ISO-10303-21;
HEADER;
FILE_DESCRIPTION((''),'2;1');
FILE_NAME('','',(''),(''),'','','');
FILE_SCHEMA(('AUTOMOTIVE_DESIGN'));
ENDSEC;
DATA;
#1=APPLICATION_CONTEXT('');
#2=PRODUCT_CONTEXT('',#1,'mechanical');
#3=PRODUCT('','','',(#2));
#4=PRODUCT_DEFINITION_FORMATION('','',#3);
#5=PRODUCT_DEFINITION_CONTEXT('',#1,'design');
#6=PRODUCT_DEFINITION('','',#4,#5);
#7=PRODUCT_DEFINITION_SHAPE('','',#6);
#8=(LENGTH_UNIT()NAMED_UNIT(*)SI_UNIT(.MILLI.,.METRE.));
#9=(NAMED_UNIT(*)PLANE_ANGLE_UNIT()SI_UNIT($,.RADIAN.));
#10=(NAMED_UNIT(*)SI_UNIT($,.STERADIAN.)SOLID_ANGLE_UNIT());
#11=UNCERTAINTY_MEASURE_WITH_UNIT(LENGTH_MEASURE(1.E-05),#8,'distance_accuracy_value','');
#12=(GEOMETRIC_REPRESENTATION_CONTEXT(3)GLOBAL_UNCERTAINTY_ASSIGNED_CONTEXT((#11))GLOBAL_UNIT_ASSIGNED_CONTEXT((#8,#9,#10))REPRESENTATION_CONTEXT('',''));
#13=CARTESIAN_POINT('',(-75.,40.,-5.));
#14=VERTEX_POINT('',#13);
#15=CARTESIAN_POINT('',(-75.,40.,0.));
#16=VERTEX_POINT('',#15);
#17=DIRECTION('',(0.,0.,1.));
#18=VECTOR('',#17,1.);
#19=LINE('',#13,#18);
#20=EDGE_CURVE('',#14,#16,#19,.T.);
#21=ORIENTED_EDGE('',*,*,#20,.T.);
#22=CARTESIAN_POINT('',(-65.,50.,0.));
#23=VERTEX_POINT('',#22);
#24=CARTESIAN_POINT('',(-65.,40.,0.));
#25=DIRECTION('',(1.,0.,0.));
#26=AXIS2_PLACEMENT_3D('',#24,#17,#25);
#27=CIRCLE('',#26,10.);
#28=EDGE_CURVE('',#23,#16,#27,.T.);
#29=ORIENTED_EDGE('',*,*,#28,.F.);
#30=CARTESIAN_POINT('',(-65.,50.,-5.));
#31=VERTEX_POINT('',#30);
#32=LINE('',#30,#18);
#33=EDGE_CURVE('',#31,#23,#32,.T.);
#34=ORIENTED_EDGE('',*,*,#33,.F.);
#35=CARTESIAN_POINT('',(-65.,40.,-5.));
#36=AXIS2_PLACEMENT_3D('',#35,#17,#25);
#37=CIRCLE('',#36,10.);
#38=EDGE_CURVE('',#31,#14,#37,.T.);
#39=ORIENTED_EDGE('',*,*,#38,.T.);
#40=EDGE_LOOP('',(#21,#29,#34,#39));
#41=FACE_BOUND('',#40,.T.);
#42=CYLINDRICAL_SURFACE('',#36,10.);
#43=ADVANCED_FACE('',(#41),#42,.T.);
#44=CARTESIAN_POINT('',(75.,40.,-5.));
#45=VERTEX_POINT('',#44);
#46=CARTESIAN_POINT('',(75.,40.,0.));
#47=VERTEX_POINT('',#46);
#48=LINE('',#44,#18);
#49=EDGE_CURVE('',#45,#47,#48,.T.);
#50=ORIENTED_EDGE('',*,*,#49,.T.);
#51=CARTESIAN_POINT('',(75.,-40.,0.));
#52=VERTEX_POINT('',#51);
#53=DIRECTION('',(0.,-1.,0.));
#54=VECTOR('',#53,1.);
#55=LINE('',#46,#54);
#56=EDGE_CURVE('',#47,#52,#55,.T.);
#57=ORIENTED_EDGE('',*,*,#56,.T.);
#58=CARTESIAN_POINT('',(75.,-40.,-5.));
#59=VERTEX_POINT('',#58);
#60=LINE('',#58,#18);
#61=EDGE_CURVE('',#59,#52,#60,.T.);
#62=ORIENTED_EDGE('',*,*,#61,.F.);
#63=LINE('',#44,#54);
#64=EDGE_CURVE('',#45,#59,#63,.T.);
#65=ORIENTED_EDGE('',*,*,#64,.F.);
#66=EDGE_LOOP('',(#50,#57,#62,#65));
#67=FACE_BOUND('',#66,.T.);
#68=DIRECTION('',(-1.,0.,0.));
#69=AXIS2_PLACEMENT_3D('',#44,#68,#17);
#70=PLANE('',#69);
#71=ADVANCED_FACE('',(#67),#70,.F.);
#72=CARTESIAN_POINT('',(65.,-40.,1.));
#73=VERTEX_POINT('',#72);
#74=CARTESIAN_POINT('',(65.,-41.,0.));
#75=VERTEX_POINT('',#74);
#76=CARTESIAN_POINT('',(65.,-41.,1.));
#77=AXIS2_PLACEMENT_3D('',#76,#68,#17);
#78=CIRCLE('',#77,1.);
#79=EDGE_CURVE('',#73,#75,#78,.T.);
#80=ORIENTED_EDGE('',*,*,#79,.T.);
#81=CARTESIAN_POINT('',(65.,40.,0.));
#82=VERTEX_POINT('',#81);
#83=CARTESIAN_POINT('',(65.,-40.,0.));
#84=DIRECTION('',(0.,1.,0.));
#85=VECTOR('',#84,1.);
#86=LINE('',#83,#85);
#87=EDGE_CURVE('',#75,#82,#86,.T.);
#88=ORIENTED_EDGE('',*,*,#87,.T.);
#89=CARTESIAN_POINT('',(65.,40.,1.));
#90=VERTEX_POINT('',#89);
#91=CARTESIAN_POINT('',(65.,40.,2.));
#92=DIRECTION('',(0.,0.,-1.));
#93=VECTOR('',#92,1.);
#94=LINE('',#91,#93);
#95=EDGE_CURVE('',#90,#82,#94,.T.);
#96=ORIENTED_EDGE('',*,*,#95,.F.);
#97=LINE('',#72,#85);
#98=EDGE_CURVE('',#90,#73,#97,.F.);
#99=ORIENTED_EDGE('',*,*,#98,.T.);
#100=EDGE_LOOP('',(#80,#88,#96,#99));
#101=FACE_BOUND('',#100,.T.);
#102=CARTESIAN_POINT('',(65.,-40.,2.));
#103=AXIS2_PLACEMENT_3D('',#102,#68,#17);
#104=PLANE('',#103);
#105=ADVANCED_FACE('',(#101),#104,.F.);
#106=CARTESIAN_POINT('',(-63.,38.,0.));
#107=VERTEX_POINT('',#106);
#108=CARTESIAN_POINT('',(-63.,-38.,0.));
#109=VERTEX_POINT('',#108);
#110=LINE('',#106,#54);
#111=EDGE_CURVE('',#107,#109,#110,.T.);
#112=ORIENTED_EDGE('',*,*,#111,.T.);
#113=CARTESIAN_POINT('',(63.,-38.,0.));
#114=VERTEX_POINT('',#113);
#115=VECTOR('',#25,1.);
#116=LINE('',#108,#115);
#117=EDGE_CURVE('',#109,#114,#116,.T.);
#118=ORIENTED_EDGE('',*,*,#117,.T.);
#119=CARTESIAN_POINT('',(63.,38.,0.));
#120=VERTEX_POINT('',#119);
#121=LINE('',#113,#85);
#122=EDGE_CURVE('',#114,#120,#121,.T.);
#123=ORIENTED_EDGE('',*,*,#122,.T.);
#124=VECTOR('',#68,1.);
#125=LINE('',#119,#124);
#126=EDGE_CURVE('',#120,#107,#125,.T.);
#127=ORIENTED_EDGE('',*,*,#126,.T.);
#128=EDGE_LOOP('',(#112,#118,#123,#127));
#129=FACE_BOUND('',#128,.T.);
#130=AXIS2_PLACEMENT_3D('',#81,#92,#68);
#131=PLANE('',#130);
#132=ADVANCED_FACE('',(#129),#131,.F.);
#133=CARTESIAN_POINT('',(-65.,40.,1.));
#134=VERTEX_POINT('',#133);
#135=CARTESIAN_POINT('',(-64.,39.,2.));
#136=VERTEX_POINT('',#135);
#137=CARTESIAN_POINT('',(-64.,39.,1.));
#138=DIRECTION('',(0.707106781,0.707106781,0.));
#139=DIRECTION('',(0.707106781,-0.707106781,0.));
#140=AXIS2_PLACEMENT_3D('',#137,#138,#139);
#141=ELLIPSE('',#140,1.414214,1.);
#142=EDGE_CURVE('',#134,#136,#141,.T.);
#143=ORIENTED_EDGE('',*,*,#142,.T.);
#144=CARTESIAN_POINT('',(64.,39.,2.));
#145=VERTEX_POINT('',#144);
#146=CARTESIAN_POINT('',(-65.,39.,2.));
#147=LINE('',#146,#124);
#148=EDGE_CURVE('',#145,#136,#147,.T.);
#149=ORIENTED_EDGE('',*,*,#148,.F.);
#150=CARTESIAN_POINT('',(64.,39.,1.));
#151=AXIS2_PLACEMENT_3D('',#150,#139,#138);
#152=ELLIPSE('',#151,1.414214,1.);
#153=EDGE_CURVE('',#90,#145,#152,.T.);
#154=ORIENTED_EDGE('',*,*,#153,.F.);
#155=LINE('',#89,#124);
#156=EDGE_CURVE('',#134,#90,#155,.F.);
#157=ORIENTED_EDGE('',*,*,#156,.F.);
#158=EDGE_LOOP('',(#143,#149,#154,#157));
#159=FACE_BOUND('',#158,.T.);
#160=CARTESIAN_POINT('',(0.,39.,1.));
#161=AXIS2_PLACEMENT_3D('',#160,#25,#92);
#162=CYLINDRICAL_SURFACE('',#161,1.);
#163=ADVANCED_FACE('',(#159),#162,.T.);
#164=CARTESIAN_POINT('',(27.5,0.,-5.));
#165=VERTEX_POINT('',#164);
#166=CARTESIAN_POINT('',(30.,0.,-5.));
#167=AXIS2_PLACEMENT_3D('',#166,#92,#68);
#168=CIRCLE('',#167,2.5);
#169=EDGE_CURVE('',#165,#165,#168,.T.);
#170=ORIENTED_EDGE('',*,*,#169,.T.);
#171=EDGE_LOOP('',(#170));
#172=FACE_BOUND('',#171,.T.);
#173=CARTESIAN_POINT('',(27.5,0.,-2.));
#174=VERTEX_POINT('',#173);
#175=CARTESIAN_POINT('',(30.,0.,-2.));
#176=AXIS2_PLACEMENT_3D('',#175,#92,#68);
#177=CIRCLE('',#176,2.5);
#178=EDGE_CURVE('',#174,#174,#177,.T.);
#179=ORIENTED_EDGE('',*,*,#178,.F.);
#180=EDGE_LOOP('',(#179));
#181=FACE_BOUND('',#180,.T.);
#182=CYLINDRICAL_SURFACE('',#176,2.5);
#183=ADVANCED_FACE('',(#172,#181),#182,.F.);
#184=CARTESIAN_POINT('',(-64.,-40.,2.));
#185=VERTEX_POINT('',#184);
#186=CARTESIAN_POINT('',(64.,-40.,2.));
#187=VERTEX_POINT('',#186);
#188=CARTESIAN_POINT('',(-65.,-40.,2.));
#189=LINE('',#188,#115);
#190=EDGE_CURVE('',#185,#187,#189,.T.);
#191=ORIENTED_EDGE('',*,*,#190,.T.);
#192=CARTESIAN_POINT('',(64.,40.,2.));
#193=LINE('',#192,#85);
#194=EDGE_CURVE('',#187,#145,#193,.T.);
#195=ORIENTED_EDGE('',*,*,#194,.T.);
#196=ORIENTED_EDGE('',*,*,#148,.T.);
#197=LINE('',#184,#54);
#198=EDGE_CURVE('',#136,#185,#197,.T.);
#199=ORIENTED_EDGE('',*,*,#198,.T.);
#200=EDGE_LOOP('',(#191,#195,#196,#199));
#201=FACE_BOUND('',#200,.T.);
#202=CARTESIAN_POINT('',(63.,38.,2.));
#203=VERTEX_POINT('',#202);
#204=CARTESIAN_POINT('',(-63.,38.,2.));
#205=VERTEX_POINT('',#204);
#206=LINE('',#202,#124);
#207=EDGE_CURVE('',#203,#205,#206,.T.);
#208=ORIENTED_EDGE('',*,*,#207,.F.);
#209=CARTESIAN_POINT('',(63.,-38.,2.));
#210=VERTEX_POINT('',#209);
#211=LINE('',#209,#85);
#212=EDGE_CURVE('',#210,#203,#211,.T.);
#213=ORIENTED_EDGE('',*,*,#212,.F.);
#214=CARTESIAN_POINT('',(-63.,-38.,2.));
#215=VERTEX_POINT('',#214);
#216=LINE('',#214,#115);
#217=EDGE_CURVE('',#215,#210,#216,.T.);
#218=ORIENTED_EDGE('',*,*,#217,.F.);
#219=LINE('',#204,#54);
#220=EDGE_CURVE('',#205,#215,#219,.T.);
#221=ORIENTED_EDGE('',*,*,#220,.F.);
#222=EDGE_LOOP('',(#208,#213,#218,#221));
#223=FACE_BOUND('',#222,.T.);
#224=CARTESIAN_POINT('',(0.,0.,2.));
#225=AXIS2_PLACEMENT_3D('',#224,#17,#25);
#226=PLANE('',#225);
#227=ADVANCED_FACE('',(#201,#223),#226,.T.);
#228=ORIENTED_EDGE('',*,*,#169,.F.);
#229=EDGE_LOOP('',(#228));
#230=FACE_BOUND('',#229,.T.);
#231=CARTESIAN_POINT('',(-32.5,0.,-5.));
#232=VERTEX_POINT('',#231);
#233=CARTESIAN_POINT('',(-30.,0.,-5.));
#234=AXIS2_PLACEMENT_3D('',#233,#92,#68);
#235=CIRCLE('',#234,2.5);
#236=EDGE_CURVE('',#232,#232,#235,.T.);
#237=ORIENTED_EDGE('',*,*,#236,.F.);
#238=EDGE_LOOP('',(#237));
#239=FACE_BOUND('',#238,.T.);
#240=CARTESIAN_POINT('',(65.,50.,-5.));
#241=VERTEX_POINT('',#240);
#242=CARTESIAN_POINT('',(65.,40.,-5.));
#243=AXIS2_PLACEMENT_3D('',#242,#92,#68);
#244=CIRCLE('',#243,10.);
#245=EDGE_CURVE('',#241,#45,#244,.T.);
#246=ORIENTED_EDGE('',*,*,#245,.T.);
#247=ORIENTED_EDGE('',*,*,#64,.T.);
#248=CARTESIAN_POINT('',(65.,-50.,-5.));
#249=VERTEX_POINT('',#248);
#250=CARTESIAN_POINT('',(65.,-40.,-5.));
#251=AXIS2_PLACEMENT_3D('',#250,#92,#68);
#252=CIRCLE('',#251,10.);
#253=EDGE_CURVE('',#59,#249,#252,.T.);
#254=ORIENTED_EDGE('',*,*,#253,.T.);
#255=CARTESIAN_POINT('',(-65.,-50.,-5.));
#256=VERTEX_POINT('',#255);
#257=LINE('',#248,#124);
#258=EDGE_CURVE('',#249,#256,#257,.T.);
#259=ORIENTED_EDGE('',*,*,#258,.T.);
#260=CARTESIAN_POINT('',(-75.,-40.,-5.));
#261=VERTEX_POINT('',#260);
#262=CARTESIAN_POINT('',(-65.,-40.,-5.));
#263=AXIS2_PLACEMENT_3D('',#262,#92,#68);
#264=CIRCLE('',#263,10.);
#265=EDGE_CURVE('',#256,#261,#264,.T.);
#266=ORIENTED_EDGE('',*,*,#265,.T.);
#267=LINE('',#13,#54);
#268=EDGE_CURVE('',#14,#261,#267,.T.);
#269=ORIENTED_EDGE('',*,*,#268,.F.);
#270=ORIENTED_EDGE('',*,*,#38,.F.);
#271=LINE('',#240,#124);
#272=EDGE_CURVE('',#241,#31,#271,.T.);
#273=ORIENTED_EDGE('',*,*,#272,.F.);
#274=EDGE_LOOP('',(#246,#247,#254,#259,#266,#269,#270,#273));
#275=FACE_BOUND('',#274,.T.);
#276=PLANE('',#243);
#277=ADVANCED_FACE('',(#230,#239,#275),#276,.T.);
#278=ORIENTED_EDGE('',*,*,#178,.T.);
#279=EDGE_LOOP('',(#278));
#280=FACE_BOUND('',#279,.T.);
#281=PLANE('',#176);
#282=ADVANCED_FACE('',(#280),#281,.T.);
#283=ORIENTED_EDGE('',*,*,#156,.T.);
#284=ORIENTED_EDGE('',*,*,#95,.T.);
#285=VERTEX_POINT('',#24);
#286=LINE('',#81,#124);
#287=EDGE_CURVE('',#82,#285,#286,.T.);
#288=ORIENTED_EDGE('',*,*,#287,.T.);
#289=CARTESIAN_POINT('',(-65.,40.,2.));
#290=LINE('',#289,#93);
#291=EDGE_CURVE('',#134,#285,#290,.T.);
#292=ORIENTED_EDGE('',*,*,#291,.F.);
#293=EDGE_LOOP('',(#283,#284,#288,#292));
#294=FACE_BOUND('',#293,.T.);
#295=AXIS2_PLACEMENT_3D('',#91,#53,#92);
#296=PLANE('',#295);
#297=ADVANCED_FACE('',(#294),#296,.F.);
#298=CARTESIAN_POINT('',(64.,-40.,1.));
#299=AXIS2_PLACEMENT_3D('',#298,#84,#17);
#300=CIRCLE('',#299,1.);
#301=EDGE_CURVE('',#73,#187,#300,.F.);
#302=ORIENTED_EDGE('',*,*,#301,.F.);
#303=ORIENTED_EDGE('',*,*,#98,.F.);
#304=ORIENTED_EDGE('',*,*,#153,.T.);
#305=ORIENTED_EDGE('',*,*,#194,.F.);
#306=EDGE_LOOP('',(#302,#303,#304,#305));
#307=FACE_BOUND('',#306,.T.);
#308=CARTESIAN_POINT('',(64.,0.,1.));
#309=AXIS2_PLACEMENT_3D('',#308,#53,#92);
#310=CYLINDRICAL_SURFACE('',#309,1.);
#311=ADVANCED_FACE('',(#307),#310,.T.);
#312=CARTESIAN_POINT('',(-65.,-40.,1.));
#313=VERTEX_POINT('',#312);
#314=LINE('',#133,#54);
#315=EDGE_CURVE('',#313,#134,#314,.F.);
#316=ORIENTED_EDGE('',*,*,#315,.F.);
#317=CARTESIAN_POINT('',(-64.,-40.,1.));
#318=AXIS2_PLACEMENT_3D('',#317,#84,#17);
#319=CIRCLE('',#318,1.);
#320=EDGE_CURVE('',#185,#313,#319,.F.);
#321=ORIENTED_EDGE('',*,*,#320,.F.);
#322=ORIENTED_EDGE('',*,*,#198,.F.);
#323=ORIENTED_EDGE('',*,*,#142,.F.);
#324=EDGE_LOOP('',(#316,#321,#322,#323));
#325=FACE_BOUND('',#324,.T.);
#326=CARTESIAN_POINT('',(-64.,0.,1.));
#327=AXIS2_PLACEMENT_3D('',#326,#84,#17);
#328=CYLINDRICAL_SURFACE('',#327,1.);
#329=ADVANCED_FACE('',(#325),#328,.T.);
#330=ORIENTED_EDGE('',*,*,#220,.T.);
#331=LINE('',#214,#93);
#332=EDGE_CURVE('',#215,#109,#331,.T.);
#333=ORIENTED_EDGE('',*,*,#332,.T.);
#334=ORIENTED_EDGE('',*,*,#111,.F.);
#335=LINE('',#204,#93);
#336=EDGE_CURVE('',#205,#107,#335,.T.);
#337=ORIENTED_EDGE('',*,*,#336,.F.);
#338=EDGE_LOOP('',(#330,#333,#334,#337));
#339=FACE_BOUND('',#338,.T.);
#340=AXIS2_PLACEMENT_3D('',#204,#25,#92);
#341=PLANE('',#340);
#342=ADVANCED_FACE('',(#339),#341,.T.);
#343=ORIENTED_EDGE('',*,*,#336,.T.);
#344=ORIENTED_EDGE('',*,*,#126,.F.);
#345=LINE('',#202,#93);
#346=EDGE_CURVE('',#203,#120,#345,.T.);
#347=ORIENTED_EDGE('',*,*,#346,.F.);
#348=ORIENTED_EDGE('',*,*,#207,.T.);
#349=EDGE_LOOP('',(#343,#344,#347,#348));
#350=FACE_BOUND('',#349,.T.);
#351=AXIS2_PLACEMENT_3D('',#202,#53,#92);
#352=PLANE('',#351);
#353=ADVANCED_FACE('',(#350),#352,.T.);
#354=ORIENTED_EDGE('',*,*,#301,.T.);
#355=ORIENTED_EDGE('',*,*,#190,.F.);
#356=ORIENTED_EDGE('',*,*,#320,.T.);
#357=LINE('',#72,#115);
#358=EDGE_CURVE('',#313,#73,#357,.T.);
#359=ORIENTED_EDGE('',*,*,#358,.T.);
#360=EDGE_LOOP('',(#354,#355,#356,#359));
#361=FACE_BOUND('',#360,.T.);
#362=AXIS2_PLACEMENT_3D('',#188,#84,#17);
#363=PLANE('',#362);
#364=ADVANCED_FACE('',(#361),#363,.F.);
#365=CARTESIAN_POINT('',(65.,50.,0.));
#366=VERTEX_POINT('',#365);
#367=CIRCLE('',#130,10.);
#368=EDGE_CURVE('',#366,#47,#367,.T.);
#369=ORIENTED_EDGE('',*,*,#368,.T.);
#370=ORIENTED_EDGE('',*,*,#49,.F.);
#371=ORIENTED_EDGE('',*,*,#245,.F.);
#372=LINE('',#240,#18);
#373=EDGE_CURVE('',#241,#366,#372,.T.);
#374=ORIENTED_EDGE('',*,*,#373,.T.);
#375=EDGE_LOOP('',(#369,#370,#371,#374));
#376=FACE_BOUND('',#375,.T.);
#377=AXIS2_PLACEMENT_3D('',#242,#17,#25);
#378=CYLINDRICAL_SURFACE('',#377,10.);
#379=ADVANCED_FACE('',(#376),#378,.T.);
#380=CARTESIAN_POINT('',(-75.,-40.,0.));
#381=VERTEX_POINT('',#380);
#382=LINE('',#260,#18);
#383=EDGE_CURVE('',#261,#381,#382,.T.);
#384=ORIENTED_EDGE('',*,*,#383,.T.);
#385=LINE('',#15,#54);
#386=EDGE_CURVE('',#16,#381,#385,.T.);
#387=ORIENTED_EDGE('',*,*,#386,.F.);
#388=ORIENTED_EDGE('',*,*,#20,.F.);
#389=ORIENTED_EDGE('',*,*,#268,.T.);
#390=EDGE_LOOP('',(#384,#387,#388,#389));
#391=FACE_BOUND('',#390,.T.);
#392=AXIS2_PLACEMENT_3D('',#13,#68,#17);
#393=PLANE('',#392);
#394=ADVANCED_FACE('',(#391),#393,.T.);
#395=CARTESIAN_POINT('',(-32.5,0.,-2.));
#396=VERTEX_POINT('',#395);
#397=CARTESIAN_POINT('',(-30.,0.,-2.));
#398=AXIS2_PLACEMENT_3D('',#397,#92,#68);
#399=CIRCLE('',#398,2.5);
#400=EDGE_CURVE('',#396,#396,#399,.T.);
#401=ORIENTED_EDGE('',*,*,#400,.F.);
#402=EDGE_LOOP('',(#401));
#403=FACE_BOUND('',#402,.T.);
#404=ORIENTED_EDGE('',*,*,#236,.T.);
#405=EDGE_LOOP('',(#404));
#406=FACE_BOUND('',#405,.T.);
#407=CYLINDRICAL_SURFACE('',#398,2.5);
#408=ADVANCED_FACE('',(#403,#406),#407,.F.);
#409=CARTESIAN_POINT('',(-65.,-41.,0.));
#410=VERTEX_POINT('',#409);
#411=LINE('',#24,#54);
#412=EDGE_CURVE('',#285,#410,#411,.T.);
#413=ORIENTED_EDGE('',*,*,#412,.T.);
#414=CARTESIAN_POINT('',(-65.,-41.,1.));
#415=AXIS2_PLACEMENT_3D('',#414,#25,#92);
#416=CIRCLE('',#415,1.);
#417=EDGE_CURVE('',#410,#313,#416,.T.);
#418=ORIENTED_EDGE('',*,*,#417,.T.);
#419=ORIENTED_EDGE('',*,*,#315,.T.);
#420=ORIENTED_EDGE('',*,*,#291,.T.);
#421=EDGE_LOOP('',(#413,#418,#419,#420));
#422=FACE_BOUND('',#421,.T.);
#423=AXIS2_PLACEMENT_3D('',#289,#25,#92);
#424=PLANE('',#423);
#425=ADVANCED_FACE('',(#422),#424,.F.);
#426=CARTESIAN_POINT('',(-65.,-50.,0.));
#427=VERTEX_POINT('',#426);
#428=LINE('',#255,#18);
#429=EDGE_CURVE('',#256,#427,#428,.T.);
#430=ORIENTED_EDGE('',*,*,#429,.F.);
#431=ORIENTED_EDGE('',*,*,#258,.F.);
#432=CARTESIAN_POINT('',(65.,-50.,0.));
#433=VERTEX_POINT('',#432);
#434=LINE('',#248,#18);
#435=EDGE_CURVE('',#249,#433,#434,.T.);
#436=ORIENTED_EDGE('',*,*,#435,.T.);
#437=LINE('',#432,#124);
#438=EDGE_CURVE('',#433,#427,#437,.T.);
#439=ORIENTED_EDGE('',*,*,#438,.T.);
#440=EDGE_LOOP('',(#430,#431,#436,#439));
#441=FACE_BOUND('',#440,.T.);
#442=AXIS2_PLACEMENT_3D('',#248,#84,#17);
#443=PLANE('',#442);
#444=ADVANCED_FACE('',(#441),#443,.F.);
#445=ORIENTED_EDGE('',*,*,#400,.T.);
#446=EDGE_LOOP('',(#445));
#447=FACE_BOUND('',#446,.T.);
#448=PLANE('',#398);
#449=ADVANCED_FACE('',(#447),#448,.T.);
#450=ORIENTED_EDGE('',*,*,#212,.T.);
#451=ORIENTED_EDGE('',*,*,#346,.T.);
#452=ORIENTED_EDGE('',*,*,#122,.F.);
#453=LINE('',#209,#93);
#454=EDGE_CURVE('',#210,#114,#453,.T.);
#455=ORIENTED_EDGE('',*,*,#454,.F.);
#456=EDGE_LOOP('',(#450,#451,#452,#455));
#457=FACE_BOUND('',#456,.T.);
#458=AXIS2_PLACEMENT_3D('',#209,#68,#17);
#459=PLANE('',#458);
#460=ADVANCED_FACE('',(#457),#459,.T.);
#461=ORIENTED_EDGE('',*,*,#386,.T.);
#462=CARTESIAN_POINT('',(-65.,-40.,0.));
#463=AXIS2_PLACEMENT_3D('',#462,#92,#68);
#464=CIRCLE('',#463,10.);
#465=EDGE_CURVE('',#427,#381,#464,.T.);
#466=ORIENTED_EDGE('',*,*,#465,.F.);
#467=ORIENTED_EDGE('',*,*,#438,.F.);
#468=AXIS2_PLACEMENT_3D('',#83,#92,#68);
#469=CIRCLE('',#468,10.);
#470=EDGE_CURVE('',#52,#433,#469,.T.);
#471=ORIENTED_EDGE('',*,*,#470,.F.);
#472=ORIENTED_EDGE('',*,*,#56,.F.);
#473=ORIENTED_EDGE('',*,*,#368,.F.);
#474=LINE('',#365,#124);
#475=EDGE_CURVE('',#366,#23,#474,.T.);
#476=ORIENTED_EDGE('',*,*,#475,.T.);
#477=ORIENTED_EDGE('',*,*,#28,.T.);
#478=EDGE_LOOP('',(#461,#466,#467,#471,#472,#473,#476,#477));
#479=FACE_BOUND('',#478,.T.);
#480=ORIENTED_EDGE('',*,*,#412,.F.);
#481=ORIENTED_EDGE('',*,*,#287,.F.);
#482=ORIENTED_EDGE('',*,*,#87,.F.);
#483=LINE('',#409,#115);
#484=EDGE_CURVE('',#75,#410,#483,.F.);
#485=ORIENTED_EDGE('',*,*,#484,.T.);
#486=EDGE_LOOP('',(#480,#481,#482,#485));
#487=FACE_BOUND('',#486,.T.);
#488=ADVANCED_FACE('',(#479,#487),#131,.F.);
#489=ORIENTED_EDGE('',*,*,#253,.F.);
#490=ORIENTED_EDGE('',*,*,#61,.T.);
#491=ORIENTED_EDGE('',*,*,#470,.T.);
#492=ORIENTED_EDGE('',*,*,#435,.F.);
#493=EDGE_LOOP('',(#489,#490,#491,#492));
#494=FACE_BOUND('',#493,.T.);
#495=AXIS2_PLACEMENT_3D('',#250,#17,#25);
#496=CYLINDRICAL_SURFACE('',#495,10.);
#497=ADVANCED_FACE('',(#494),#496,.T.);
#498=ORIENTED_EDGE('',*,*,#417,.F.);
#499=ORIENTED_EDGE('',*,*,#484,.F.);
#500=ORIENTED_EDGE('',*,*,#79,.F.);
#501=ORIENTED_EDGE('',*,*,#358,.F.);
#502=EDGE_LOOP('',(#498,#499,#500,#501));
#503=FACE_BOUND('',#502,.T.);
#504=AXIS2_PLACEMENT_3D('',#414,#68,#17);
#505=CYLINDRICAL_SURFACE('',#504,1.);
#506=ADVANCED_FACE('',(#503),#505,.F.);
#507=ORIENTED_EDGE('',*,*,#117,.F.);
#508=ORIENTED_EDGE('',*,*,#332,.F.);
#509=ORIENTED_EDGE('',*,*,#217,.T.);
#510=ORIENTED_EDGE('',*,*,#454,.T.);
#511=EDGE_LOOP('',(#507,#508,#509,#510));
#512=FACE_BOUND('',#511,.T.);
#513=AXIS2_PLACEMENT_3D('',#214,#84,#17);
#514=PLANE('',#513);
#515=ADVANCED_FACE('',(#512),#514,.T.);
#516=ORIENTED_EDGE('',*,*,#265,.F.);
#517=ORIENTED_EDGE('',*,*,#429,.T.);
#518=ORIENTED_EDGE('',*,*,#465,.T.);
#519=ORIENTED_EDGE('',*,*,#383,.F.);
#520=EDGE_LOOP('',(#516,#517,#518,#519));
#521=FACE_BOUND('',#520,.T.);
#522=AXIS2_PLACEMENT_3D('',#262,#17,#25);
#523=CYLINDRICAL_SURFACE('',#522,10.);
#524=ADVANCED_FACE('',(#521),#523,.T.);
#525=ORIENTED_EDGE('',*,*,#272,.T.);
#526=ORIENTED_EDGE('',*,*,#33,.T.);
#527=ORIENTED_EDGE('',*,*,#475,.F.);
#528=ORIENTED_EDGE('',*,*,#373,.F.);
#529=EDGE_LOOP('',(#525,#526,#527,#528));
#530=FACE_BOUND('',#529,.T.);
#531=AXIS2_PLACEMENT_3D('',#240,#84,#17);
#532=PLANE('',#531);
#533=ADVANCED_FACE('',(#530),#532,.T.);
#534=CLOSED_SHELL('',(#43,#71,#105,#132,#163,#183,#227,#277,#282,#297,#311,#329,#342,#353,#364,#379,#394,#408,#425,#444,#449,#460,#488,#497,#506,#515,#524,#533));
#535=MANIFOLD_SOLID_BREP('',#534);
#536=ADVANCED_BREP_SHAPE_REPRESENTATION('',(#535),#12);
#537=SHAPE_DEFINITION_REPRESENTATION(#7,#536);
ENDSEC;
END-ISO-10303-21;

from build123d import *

# Parameters (mm, degrees)
BOSS_EXTRUDE1_DEPTH = 5
SKETCH2_W           = 130
SKETCH2_H           = 80
SKETCH2_W_2         = 126
SKETCH2_H_2         = 76
BOSS_EXTRUDE2_DEPTH = 2
FILLET1_R           = 1
SKETCH3_R           = 2.5
CUT_EXTRUDE1_DEPTH  = 3


with BuildPart() as part:
    # Sketch1 → Boss-Extrude1 (new body)
    with BuildSketch(Plane.XY):
        with BuildLine():
            Line((65, 50), (-65, 50))
            ThreePointArc((-65, 50), (-72.071067812, 47.071067812), (-75, 40))
            Line((-75, 40), (-75, -40))
            ThreePointArc((-75, -40), (-72.071067812, -47.071067812), (-65, -50))
            Line((-65, -50), (65, -50))
            ThreePointArc((65, -50), (72.071067812, -47.071067812), (75, -40))
            Line((75, -40), (75, 40))
            ThreePointArc((75, 40), (72.071067812, 47.071067812), (65, 50))
        make_face()
    extrude(amount=-BOSS_EXTRUDE1_DEPTH)

    # Sketch2 → Boss-Extrude2 (add)
    with BuildSketch(Plane.XY):
        Rectangle(SKETCH2_W, SKETCH2_H)
        Rectangle(SKETCH2_W_2, SKETCH2_H_2, mode=Mode.SUBTRACT)
    extrude(amount=BOSS_EXTRUDE2_DEPTH)

    # Fillet1
    fillet1_edges = [part.edges().sort_by_distance(p)[0] for p in [
        (0, -40, 0),
        (65, 0, 2),
        (-65, 0, 2),
        (0, 40, 2),
    ]]
    fillet(fillet1_edges, radius=FILLET1_R - 0.0001)  # a hair under: the kernel refuses the full size

    # Sketch3 → Cut-Extrude1 (cut)
    with BuildSketch(Plane(origin=(0, 0, -5), x_dir=(-1, 0, 0), z_dir=(0, 0, -1))):
        with Locations((-30, 0)):
            Circle(SKETCH3_R)
        with Locations((30, 0)):
            Circle(SKETCH3_R)
    extrude(amount=-CUT_EXTRUDE1_DEPTH, mode=Mode.SUBTRACT)


solid = part.part
